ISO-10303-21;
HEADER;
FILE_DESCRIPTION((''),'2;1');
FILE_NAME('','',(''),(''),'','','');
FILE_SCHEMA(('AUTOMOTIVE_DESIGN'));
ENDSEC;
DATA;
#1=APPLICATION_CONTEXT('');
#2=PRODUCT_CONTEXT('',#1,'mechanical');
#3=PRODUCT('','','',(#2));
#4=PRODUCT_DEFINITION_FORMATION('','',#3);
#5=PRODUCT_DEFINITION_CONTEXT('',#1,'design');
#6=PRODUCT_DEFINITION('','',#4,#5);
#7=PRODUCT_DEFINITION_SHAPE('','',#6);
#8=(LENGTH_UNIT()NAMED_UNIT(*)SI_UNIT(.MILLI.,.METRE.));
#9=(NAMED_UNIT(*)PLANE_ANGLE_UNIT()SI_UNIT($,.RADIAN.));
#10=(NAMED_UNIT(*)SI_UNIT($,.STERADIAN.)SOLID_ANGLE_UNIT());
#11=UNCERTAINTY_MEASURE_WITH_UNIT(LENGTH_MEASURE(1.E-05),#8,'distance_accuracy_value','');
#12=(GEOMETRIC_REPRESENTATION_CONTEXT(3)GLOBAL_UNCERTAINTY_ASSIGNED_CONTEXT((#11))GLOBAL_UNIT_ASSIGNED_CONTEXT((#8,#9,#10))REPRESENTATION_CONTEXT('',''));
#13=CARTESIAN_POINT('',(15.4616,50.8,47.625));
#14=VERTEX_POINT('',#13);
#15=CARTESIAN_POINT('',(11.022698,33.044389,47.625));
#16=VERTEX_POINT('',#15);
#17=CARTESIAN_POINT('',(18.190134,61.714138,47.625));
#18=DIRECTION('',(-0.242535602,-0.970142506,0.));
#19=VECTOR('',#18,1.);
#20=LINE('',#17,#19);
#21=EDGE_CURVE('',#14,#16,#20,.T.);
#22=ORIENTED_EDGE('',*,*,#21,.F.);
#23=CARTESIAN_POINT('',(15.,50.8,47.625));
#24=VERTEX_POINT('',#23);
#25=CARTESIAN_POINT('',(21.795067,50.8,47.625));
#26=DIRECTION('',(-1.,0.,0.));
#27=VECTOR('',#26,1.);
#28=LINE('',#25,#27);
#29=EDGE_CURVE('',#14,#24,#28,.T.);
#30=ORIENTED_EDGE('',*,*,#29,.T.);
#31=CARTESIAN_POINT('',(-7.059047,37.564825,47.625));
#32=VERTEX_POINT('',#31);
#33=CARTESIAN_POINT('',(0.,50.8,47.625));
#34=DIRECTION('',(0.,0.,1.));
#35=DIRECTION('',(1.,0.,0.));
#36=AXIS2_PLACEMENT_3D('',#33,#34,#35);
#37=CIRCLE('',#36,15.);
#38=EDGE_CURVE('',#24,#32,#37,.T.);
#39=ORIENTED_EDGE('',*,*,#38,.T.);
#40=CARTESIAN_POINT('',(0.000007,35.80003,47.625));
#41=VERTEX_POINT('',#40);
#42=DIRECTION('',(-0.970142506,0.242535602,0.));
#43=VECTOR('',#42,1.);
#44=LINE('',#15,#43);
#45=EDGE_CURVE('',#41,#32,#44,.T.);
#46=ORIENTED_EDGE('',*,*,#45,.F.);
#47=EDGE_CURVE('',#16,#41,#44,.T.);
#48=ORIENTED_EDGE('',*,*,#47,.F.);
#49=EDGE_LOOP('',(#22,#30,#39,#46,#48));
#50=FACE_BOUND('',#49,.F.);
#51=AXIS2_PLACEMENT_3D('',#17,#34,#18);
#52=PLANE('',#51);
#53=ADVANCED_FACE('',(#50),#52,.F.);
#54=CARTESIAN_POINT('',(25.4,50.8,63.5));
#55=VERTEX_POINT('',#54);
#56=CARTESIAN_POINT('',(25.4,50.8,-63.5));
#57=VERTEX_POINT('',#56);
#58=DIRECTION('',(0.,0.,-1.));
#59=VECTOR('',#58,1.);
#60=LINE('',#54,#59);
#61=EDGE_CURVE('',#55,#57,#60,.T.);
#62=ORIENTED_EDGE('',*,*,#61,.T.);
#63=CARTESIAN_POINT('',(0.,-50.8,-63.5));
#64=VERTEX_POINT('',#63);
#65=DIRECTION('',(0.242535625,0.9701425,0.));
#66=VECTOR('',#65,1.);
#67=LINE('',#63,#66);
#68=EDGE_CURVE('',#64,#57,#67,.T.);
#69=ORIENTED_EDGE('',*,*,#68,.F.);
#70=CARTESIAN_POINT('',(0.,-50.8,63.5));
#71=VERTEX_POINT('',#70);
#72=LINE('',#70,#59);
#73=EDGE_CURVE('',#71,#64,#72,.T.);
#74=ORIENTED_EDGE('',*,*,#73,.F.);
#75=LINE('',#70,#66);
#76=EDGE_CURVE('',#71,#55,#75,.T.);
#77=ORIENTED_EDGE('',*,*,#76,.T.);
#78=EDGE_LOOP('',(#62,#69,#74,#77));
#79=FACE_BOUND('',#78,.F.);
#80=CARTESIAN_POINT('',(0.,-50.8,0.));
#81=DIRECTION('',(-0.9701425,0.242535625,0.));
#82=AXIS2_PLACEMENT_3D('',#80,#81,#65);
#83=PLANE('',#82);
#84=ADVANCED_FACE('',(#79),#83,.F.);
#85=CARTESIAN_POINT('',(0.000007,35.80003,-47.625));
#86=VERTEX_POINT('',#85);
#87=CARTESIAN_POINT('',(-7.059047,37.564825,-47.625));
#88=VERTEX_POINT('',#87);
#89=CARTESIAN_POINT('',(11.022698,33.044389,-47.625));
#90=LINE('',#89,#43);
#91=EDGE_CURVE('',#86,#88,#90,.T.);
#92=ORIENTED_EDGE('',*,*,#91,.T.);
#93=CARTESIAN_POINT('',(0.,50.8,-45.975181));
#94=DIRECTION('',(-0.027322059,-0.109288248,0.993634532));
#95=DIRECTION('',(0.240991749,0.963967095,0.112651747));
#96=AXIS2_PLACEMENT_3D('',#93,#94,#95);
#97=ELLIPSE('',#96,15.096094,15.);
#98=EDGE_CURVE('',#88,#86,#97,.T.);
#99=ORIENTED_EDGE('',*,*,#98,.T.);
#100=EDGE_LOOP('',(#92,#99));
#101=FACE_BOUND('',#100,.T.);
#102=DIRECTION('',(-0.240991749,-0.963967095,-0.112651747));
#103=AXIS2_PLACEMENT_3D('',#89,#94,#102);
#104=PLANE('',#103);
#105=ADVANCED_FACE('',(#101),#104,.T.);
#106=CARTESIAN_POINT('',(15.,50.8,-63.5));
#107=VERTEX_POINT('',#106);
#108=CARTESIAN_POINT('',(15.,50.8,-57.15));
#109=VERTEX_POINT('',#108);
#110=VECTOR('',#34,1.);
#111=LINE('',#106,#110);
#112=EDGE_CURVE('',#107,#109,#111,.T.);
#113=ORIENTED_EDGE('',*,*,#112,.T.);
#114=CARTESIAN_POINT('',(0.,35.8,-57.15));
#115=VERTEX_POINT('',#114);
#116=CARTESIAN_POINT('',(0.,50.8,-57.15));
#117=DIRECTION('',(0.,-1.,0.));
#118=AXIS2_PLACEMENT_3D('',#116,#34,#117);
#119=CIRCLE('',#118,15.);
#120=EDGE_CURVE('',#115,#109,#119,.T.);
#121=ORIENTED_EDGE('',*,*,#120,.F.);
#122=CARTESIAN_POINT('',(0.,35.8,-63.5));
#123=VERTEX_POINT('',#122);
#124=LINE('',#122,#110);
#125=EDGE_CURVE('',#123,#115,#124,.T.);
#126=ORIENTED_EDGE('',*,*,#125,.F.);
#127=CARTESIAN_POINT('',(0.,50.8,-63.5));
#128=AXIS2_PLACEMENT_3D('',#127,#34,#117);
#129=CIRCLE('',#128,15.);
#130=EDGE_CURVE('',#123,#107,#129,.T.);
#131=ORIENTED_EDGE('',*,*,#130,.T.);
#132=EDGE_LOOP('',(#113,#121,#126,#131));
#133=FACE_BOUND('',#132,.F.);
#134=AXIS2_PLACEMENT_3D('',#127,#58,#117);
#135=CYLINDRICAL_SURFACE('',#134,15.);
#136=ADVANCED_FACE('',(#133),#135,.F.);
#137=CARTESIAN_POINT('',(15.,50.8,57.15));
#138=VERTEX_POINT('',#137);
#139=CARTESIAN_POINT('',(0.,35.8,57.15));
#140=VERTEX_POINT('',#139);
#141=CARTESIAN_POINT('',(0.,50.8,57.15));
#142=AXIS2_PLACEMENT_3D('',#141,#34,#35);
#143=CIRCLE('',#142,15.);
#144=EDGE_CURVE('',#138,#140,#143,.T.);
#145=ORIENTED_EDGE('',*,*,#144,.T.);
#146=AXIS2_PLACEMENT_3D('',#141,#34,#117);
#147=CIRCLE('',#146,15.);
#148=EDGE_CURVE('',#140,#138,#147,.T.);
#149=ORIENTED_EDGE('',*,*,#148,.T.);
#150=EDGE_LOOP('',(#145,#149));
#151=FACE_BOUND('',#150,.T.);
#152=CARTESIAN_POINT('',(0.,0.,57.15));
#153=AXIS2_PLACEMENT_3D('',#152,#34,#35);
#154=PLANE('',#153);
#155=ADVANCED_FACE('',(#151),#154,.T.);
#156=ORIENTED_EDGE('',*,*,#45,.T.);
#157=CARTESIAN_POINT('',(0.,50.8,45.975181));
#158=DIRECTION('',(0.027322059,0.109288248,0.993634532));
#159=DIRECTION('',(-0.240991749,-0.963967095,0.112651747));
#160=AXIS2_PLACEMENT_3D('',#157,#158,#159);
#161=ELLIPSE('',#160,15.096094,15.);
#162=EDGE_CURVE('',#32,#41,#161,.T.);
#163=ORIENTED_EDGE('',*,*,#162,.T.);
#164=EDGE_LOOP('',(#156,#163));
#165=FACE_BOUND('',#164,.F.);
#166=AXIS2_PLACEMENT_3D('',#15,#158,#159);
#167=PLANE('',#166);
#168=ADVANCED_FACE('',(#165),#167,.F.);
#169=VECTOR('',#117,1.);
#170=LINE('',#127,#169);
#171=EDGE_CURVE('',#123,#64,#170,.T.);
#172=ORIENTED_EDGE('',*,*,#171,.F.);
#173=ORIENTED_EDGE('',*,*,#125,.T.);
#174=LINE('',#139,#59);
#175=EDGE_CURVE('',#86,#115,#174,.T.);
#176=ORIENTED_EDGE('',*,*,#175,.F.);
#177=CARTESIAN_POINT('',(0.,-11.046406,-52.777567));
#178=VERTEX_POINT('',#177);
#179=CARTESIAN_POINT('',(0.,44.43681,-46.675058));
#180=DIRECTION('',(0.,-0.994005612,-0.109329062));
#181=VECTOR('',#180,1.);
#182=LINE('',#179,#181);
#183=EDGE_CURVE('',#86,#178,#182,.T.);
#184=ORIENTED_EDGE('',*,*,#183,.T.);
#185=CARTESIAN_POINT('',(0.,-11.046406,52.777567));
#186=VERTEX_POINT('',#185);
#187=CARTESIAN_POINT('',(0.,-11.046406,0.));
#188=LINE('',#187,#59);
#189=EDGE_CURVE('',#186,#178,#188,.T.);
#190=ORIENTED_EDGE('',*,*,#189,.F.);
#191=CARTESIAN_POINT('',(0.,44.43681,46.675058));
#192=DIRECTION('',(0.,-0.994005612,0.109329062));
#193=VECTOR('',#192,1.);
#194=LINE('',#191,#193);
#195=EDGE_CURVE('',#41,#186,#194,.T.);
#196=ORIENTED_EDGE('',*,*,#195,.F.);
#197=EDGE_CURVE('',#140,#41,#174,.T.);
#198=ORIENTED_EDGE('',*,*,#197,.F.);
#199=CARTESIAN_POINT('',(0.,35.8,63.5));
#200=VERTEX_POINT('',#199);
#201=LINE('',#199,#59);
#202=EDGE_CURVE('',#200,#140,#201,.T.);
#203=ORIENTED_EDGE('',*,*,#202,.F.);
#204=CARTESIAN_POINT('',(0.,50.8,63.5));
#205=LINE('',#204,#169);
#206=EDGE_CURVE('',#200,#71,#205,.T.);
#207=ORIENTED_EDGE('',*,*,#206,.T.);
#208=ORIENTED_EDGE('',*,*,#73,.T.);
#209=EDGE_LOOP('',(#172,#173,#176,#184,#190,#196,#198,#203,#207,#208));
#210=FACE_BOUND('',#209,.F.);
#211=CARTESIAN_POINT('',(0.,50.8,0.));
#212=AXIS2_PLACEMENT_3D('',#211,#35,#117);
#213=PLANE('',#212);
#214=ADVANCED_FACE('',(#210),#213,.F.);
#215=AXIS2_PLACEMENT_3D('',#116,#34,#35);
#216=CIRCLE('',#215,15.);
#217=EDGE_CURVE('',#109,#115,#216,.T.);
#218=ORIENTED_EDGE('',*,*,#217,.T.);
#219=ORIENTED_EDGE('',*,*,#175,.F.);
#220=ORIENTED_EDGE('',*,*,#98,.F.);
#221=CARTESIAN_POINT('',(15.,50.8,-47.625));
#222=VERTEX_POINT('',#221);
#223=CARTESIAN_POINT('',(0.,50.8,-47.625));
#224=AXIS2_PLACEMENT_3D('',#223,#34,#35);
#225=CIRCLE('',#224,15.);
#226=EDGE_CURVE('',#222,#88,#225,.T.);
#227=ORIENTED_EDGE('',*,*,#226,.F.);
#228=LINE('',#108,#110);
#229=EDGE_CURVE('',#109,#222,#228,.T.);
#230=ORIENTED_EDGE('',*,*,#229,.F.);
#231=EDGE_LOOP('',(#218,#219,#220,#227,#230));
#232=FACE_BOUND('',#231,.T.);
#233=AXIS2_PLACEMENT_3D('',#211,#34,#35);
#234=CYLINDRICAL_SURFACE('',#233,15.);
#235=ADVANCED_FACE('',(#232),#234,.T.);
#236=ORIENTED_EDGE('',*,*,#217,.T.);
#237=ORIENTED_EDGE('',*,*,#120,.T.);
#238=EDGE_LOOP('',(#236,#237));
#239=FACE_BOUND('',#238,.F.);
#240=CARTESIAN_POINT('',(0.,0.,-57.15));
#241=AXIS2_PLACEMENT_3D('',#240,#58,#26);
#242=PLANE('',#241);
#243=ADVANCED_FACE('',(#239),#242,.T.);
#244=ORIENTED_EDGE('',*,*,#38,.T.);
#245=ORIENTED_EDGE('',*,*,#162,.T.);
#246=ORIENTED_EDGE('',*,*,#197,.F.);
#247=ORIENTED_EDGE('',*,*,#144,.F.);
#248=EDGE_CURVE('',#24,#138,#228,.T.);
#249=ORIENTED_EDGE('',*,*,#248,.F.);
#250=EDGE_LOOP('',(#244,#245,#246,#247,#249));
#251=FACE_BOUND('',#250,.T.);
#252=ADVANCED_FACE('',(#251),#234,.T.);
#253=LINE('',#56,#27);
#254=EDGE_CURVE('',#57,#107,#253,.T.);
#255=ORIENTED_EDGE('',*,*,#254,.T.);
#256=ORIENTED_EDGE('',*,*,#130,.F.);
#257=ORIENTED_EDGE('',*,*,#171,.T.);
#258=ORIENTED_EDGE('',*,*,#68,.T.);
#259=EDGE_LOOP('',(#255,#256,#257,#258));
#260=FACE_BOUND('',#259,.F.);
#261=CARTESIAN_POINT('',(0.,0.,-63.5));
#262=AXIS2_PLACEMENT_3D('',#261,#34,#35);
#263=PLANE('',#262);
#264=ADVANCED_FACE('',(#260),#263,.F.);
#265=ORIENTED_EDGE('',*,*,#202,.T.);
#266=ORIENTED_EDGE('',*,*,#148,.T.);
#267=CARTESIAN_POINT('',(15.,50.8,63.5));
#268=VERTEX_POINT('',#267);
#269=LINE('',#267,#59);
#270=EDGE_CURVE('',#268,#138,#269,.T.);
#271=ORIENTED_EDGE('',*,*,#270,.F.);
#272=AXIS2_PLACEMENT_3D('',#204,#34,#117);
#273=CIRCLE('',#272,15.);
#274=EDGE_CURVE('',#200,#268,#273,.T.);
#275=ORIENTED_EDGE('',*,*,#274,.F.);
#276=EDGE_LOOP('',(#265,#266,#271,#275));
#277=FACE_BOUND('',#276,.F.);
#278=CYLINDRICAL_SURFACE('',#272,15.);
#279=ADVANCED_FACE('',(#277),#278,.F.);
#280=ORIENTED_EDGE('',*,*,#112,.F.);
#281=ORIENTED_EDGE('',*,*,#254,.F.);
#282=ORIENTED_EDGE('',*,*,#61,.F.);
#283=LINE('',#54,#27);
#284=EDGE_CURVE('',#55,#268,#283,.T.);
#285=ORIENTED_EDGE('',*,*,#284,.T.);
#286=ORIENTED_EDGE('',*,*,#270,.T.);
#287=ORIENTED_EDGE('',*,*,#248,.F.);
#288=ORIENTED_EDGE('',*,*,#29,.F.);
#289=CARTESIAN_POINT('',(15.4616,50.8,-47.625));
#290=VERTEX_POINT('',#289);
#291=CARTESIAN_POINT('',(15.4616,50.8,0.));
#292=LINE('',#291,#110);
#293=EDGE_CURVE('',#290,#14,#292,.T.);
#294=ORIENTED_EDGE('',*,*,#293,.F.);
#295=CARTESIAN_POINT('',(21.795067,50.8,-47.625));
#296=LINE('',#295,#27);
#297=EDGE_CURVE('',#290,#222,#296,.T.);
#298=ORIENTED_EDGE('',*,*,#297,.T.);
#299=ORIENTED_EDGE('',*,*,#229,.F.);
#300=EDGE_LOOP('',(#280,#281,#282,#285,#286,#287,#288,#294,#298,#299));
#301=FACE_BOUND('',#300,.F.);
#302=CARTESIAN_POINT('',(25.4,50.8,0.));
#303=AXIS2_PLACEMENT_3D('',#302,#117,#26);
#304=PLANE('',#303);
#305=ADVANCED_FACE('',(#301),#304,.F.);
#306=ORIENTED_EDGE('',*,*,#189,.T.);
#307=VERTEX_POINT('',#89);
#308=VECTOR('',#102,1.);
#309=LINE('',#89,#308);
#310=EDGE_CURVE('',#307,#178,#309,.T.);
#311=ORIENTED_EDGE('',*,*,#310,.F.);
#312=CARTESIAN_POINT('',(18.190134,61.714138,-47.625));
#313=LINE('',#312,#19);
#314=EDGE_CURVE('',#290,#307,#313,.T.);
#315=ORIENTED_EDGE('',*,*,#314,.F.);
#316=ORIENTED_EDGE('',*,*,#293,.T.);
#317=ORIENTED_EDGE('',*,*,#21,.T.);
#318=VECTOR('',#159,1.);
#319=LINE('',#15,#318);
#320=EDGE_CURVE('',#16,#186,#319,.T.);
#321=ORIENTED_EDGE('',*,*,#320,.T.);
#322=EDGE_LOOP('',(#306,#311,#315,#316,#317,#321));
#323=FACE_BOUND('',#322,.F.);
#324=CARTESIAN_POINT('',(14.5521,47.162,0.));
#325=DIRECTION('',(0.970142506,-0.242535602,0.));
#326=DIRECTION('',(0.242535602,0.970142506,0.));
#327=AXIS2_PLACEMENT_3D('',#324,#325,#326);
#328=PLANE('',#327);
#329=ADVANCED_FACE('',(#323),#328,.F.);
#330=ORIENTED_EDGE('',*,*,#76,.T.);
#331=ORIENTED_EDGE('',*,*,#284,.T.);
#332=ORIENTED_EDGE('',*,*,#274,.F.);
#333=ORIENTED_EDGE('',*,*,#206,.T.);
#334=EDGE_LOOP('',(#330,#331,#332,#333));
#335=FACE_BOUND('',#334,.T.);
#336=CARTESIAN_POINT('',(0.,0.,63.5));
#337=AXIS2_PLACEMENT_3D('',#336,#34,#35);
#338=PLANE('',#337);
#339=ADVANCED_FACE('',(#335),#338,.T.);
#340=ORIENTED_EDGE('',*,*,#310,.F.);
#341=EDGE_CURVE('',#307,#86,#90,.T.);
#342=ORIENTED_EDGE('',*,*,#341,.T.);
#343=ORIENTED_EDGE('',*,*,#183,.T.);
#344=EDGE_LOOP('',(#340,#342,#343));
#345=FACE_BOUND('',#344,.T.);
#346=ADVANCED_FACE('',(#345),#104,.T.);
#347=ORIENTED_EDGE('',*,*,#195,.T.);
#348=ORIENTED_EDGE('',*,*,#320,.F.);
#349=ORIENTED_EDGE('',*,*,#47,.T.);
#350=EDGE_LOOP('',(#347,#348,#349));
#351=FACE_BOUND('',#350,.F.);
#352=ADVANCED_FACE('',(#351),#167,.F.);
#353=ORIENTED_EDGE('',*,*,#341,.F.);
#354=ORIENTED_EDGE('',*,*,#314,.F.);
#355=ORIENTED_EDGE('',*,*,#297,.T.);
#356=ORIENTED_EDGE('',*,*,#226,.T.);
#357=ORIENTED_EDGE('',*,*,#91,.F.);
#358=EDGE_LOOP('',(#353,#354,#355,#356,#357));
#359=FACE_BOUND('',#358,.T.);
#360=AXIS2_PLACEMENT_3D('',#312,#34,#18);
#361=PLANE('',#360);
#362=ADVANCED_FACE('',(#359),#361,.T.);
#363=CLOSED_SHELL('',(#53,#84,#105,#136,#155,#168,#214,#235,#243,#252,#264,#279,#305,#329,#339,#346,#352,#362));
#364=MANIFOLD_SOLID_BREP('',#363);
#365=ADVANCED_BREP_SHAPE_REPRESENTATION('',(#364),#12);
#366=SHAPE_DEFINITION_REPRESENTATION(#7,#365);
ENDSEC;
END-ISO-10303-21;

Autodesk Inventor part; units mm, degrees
ref_plane "YZ Plane" through (0, 0, 0) normal (1, 0, 0) x (0, 1, 0)
ref_plane "XZ Plane" through (0, 0, 0) normal (0, 1, 0) x (-1, 0, 0)
ref_plane "XY Plane" through (0, 0, 0) normal (0, 0, 1) x (1, 0, 0)
sketch "Sketch1" plane through (0, 0, 0) normal (0, 0, 1) x (1, 0, 0)
  line L0 (0, 50.8) -> (0, -50.8)
  line L1 (0, -50.8) -> (25.4, 50.8)
  line L2 (25.4, 50.8) -> (0, 50.8)
  point P0 (0, 0)
  point P1 (0, 0)
  dimension "d0" = 101.6
  dimension "d2" = 25.4
extrude "Extrusion1" add sketch "Sketch1" along normal mid plane 127
sketch "Sketch2" plane through (0, 0, 0) normal (0, 0, 1) x (1, 0, 0)
  line L0 (0, 50.8) -> (0, -50.8) projected
  circle A0 centre (0, 50.8) radius 15
  point P0 (0, 0)
  dimension "d5" = 30
extrude "Extrusion2" add sketch "Sketch2" along normal mid plane 114.3
sketch "Sketch3" plane through (0, 0, 63.5) normal (0, 0, 1) x (1, 0, 0)
  line L0 (0, 50.8) -> (0, -50.8) projected
  line L1 (0, 50.8) -> (25.4, 50.8) projected
  arc A0 (0, 35.8) -> (15, 50.8) centre (0, 50.8) ccw
  arc A1 (15, 50.8) -> (0, 35.8) centre (0, 50.8) ccw projected
  point P0 (0, 0)
extrude "Extrusion3" cut sketch "Sketch3" against normal up to surface (6.35 mm away) contours L1 A0 L0
mirror "Mirror1" about plane through (0, 0, 0) normal (0, 0, 1) of "Extrusion3"
ref_plane "Work Plane1" through (14.5521, 47.162, 0) normal (0.9701425, -0.2425356, 0) x (0.2425356, 0.9701425, 0)
sketch "Sketch4" plane through (14.5521, 47.162, 0) normal (0.9701425, -0.2425356, 0) x (0.2425356, 0.9701425, 0)
  line L0 (15, -57.15) -> (15, 57.15) projected
  line L1 (15, 47.625) -> (-14.5521, 47.625)
  line L2 (-14.5521, 47.625) -> (-98.5665, 57.15)
  line L3 (-98.5665, -63.5) -> (-98.5665, 63.5) projected
  line L4 (15, 0) -> (-98.5665, 0) construction
  line L5 (15, 57.15) -> (-15, 57.15) construction
  line L6 (-15, -57.15) -> (-15, 57.15) construction
  line L7 (-14.5521, 57.15) -> (-14.5521, -57.15) construction
  line L8 (15, -47.625) -> (-14.5521, -47.625)
  line L9 (-14.5521, -47.625) -> (-98.5665, -57.15)
  line L10 (15, 47.625) -> (15, -47.625)
  line L11 (-98.5665, 57.15) -> (-98.5665, -57.15)
  point P0 (-49.2832, 0)
  point P1 (3.638, 57.15)
  dimension "d10" = 6.35
  dimension "d11" = 9.525
extrude "Extrusion4" cut sketch "Sketch4" against normal through all
properties part number "NASA-20-ARM-SH-01"
